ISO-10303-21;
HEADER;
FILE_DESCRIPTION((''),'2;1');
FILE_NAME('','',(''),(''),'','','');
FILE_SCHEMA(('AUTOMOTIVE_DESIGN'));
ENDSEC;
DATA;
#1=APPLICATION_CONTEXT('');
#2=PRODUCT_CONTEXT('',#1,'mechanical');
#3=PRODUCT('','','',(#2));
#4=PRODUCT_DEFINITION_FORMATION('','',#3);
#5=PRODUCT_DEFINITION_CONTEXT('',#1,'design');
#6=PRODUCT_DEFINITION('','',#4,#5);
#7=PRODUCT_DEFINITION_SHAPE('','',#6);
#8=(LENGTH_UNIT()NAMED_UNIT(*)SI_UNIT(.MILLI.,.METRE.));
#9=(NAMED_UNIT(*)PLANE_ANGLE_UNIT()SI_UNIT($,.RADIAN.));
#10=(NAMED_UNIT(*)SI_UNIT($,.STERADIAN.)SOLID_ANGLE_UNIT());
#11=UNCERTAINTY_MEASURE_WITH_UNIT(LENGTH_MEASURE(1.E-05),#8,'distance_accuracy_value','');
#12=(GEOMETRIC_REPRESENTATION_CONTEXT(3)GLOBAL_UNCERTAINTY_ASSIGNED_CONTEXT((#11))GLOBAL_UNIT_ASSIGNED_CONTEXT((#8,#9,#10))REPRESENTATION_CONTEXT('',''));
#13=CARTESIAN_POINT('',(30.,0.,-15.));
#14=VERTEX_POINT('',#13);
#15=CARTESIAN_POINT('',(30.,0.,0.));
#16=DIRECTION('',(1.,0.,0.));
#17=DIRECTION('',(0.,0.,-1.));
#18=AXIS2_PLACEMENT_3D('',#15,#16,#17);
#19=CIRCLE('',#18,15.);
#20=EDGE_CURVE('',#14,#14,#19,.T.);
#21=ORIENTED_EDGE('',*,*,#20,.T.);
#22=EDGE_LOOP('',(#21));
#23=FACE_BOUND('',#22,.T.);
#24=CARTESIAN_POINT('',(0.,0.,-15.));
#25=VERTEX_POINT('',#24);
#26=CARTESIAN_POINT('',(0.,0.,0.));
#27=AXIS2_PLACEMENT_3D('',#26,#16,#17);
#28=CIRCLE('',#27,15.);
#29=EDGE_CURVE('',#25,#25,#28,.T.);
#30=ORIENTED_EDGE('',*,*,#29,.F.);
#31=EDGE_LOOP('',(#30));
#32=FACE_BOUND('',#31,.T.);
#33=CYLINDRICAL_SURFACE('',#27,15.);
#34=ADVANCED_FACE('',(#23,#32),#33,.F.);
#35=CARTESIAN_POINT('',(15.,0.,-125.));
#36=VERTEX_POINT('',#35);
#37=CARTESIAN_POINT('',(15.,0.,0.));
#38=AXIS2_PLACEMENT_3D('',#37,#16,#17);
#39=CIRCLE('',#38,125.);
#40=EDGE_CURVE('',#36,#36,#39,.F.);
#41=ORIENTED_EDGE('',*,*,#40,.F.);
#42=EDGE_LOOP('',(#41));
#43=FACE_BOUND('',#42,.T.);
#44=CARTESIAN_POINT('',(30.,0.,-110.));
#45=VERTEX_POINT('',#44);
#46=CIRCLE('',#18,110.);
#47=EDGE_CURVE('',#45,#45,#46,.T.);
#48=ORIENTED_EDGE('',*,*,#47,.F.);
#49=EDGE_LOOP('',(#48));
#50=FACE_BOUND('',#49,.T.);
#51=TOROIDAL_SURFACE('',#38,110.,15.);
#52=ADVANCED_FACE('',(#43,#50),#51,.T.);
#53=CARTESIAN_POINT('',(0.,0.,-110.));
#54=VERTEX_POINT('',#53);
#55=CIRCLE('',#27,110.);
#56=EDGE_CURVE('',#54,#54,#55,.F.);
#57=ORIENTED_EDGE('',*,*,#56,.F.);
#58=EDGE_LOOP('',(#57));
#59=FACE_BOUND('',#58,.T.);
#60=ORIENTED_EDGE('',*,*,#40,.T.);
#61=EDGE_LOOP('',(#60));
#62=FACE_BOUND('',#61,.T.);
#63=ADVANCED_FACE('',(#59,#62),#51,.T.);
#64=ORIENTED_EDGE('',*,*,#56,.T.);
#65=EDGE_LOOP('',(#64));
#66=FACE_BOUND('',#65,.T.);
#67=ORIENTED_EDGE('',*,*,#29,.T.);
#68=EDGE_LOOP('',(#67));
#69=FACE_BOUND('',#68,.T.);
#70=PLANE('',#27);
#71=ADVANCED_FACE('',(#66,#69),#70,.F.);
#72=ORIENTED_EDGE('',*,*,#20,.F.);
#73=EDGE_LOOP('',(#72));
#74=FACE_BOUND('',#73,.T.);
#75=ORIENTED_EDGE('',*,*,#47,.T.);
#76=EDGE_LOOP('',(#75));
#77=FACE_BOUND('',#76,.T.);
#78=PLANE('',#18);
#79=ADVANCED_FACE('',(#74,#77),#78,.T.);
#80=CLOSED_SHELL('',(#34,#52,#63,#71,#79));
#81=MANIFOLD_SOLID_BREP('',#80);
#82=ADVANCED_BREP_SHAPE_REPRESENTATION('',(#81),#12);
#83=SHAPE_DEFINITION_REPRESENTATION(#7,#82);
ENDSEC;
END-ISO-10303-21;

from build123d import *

# Parameters (mm, degrees)
SKETCH1_R           = 125
BOSS_EXTRUDE1_DEPTH = 30
FILLET1_R           = 15
SKETCH2_R           = 15
CUT_EXTRUDE1_DEPTH  = 180.30421084


with BuildPart() as part:
    # Sketch1 → Boss-Extrude1 (new body)
    with BuildSketch(Plane(origin=(0, 0, 0), x_dir=(0, 0, -1), z_dir=(1, 0, 0))):
        Circle(SKETCH1_R)
    extrude(amount=BOSS_EXTRUDE1_DEPTH)

    # Fillet1
    fillet1_edges = [part.edges().sort_by_distance(p)[0] for p in [
        (0, 0, 125),
        (30, 0, 125),
    ]]
    fillet(fillet1_edges, radius=FILLET1_R - 0.0001)  # a hair under: the kernel refuses the full size

    # Sketch2 → Cut-Extrude1 (cut, through all)
    with BuildSketch(Plane(origin=(30, 0, 0), x_dir=(0, 0, -1), z_dir=(1, 0, 0))):
        Circle(SKETCH2_R)
    extrude(amount=-CUT_EXTRUDE1_DEPTH, mode=Mode.SUBTRACT)


solid = part.part
